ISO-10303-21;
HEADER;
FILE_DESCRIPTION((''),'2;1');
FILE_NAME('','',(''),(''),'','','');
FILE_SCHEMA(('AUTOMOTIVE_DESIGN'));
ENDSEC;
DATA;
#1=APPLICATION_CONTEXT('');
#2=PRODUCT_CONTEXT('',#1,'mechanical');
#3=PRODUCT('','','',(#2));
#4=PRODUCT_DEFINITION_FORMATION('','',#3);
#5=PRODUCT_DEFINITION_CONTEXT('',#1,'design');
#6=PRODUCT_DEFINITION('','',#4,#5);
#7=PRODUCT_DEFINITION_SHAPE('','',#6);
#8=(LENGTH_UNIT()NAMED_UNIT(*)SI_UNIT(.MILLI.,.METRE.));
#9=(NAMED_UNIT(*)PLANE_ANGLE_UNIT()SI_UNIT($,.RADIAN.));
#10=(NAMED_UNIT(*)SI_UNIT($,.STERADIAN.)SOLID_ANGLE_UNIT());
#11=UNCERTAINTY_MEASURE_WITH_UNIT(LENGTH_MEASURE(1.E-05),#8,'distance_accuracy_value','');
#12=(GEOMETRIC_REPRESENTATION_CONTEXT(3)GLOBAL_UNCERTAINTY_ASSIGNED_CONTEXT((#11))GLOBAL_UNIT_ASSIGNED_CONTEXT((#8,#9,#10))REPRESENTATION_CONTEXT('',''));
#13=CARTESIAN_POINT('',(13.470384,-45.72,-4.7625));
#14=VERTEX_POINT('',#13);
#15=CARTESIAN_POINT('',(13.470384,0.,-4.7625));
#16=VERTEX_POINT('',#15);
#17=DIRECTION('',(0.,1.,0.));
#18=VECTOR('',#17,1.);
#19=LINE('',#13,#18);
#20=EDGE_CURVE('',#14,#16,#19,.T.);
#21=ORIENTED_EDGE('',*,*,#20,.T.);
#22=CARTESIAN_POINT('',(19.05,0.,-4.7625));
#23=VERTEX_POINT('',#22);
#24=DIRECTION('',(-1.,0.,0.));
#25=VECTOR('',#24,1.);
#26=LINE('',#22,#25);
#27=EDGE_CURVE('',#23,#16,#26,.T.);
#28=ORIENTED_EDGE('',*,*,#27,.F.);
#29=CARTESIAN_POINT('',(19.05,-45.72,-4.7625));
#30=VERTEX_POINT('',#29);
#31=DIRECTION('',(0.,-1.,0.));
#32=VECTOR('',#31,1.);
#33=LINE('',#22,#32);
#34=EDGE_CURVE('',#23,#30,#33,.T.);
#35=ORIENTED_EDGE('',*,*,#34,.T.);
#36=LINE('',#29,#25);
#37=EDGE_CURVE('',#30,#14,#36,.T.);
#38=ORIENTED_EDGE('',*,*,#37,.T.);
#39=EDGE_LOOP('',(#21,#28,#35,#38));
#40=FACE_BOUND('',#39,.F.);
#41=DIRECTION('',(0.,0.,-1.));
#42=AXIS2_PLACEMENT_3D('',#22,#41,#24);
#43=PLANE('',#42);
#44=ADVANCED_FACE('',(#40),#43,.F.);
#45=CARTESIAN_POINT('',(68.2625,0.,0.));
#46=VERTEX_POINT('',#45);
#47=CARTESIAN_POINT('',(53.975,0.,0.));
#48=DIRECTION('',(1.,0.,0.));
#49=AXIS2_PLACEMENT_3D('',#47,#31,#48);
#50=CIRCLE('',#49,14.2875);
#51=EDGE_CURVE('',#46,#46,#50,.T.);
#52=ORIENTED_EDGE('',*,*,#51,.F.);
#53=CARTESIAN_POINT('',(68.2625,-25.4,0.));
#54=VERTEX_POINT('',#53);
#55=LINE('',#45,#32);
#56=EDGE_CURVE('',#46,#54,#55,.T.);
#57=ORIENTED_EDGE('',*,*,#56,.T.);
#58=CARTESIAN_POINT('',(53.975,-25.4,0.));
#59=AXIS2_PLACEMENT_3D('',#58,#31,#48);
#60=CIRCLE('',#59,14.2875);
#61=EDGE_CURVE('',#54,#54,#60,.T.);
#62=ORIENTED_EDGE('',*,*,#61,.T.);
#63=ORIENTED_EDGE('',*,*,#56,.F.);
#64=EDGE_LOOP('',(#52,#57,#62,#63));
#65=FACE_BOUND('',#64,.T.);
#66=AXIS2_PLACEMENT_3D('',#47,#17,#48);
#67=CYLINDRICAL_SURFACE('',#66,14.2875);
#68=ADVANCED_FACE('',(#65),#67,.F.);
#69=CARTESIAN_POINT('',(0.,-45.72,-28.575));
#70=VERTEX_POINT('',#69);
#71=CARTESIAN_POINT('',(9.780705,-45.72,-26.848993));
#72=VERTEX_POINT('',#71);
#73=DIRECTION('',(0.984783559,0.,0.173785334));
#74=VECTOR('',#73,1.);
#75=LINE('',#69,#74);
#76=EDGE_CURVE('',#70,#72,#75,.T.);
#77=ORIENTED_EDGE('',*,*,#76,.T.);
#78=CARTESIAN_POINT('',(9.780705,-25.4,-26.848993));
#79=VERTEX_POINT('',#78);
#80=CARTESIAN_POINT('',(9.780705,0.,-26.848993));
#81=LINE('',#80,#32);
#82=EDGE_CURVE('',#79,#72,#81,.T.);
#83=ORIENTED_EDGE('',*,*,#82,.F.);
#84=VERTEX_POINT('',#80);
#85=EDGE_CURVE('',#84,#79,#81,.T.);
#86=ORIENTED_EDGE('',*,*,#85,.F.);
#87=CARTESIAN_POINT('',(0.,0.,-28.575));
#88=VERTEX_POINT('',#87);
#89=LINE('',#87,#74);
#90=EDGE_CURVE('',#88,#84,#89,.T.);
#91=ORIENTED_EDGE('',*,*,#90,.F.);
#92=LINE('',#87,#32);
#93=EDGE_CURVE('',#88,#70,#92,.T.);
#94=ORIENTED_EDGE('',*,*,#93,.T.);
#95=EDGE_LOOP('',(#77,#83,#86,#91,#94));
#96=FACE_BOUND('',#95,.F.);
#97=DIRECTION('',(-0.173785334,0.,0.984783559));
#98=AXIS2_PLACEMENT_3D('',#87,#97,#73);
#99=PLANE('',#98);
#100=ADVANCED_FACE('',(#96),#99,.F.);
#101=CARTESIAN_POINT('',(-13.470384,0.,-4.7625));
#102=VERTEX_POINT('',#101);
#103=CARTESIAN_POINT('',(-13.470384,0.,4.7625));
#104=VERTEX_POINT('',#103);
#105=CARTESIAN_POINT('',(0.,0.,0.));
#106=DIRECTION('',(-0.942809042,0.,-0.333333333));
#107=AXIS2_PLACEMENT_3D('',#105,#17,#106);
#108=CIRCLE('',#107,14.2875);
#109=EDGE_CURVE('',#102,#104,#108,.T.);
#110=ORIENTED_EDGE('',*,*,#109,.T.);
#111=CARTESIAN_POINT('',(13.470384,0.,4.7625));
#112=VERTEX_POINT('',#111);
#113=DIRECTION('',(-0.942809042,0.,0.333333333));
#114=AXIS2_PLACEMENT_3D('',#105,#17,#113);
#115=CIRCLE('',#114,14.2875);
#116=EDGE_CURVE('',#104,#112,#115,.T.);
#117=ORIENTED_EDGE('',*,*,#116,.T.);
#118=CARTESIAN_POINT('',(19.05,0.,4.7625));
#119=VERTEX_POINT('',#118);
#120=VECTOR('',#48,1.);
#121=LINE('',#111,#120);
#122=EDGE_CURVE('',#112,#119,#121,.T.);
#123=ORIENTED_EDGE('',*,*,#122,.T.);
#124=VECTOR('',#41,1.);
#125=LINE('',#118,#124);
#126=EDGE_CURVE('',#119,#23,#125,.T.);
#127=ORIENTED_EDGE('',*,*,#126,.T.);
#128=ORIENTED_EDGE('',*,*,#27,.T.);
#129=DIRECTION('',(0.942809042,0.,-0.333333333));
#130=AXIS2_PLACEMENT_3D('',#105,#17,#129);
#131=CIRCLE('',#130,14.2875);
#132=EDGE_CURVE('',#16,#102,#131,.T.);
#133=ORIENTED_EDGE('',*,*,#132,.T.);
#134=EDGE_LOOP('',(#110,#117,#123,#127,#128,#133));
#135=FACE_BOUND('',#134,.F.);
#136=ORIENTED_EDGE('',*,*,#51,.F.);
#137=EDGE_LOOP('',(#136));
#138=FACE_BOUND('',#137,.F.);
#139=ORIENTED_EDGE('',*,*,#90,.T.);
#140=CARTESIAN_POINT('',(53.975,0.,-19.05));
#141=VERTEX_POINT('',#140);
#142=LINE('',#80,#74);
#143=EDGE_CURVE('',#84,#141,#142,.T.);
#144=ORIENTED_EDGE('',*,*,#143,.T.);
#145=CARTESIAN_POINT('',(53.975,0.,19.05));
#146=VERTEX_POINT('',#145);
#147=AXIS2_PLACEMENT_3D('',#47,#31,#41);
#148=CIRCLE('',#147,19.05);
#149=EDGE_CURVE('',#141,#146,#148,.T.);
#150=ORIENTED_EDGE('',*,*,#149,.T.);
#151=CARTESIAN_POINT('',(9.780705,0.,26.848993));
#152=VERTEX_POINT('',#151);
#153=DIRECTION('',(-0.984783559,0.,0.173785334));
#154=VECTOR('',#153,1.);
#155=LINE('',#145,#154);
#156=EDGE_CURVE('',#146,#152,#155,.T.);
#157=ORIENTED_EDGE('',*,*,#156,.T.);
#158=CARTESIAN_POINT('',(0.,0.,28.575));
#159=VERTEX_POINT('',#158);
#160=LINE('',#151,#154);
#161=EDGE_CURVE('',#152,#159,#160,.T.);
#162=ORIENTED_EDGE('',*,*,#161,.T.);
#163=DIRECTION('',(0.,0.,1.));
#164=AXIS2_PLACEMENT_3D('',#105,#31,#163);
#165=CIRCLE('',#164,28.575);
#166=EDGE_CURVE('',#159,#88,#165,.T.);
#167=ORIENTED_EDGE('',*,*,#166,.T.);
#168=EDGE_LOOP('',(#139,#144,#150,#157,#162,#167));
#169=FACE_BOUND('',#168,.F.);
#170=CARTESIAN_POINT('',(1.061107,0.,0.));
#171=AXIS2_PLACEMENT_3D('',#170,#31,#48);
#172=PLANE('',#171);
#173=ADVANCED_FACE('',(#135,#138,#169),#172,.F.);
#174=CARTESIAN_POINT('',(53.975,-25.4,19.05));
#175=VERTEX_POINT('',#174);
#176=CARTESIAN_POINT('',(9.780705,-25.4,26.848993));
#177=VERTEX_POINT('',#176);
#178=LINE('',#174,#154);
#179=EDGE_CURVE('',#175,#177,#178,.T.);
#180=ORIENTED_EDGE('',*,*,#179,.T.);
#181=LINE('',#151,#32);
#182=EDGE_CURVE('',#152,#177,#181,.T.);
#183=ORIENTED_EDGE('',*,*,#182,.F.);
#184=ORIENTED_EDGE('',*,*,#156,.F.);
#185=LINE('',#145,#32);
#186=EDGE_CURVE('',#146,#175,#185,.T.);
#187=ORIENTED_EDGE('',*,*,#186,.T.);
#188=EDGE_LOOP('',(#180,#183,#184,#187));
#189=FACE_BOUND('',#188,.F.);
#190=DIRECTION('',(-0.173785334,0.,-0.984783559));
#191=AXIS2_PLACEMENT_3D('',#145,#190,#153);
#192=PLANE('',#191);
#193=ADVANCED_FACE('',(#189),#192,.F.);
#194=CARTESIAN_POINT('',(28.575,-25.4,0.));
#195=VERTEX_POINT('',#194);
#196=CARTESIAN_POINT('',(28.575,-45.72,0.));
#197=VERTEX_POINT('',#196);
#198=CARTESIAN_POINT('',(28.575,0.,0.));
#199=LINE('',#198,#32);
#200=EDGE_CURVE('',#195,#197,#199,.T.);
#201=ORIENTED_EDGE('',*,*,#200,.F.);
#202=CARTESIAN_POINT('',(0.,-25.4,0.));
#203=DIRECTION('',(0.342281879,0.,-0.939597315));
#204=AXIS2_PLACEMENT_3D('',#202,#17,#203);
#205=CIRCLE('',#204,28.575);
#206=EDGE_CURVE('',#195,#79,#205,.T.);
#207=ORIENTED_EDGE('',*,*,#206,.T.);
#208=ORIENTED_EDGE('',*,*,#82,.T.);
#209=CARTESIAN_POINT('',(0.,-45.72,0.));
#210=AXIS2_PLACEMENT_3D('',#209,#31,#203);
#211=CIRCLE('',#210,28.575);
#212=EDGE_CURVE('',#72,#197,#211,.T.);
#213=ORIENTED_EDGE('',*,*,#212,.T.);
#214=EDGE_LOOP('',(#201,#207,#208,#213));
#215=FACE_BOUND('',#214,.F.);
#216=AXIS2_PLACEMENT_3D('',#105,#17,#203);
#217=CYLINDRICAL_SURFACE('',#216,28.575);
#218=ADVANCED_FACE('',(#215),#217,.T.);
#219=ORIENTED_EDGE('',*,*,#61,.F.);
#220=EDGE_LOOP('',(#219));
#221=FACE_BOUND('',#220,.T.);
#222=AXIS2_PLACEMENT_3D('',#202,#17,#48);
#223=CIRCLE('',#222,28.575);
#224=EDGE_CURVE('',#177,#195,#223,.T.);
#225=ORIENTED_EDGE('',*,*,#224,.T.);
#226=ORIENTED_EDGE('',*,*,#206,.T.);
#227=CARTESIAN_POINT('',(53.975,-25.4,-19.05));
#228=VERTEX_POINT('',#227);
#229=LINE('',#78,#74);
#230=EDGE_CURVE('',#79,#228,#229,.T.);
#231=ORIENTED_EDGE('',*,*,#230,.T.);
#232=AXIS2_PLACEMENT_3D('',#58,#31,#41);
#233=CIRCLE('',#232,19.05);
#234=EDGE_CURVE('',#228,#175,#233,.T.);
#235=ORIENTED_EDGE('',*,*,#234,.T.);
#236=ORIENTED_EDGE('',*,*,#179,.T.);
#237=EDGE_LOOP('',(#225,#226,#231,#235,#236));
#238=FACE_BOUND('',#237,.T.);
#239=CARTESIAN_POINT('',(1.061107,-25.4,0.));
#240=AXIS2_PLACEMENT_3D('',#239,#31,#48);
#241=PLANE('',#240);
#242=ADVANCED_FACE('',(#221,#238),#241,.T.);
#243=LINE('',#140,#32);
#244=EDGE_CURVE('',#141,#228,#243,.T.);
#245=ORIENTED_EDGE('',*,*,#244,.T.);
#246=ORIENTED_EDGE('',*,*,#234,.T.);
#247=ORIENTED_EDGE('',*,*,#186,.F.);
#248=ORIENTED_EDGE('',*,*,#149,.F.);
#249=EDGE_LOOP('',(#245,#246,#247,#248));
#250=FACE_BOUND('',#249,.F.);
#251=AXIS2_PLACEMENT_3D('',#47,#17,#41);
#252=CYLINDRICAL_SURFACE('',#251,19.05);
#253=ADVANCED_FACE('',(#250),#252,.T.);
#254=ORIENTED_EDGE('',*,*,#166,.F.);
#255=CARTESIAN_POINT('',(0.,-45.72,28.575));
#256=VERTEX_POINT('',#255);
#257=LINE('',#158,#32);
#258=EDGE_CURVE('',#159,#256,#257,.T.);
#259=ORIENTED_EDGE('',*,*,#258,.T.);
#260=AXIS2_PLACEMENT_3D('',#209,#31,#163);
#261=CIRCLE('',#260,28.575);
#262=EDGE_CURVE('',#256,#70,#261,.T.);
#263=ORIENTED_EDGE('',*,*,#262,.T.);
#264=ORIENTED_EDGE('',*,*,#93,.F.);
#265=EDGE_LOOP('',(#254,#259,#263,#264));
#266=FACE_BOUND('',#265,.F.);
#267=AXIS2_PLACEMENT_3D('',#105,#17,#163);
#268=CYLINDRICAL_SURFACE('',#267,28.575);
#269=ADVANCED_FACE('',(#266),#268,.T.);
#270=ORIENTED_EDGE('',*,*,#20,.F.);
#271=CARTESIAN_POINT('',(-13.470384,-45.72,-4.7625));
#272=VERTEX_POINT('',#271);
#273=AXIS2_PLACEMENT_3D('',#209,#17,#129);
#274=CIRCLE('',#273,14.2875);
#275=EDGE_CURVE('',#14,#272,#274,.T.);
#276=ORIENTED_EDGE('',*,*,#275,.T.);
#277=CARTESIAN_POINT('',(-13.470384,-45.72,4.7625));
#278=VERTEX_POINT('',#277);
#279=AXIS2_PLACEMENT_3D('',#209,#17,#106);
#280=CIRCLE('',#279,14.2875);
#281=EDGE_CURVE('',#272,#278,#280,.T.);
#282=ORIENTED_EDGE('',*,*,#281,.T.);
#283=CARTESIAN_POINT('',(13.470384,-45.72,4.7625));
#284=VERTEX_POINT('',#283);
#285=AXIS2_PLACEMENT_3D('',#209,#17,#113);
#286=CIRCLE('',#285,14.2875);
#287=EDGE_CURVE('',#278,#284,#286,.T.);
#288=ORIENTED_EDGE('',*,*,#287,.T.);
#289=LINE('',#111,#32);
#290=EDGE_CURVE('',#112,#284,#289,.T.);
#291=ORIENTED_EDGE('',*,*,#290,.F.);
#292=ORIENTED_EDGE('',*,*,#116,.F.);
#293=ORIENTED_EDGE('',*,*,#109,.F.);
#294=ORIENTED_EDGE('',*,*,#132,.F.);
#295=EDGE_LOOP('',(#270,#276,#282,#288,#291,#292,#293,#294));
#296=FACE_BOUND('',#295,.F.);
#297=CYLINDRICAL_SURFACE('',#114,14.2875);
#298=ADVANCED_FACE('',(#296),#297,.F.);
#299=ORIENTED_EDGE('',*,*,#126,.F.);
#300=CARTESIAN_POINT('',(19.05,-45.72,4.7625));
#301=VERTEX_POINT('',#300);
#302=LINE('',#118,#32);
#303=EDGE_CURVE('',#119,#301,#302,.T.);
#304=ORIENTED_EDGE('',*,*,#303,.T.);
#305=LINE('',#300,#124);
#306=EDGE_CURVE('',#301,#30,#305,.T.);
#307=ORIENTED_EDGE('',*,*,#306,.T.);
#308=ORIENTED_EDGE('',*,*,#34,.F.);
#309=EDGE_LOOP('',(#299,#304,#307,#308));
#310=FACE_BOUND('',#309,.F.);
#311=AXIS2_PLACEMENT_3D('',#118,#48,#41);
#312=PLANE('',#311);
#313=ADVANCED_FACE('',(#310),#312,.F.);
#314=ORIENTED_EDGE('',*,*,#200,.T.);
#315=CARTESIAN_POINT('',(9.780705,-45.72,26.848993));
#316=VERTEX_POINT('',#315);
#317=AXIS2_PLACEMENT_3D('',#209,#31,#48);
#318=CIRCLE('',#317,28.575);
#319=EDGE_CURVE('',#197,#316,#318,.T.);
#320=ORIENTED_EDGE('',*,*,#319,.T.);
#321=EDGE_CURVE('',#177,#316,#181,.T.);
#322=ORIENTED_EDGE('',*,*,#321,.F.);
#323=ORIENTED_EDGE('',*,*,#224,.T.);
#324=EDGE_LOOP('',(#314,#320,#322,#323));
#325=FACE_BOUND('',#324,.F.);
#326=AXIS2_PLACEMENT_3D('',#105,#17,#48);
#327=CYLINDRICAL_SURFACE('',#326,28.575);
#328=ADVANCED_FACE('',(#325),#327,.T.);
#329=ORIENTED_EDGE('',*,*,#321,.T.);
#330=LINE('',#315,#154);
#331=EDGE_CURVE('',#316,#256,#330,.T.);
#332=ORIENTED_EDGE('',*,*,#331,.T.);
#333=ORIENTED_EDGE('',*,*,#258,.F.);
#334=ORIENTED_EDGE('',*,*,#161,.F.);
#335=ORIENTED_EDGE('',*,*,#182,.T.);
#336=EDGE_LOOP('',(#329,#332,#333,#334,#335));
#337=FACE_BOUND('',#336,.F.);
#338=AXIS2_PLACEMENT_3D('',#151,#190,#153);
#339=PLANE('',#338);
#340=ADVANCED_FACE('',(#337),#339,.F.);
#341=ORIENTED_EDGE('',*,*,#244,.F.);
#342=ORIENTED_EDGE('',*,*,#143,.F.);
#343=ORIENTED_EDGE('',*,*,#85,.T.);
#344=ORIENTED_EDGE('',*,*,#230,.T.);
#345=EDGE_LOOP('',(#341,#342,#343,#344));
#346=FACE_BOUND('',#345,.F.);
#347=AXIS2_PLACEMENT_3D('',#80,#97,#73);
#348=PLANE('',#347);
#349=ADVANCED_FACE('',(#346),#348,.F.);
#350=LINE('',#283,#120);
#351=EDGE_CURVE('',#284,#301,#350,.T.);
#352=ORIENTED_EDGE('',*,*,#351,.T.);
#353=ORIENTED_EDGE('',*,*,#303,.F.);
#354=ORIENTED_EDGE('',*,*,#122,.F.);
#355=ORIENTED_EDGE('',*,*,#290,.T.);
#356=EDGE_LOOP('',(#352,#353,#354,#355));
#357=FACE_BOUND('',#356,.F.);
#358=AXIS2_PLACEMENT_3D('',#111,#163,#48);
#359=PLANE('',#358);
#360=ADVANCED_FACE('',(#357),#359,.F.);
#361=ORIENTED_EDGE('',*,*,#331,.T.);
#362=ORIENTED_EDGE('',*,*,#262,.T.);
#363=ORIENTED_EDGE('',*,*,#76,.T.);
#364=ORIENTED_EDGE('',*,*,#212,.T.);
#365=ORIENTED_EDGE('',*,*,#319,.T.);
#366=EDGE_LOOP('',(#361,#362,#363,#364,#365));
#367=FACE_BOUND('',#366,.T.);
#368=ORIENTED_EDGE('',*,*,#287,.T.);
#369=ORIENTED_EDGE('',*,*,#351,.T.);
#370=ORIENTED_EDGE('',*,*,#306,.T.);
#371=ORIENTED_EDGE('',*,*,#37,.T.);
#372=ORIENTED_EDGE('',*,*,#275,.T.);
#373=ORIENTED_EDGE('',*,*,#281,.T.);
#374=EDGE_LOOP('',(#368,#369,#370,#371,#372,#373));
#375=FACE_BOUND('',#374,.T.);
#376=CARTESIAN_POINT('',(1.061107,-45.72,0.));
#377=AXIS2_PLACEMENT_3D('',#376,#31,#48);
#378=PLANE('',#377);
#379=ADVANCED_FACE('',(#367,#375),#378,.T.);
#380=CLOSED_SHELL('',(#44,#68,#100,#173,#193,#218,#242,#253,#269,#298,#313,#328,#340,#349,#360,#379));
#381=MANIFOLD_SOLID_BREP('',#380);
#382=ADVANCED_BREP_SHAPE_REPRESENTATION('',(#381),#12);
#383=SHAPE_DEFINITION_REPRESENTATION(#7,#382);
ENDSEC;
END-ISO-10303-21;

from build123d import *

# Parameters (mm, degrees)
F0_R     = 14.2875
F1_DEPTH = 25.4
F2_DEPTH = 45.72


with BuildPart() as f1:
    # F0 (on Front) → F1 (new body)
    with BuildSketch(Plane.XZ):
        with BuildLine():
            Line((9.780704698, 26.8489932886), (0, 28.575))
            ThreePointArc((0, 28.575), (-28.575, 0), (0, -28.575))
            Line((0, -28.575), (9.780704698, -26.8489932886))
            ThreePointArc((9.780704698, -26.8489932886), (23.4095521288, -16.3866864902), (28.575, 0))
            ThreePointArc((28.575, 0), (23.4095521288, 16.3866864902), (9.780704698, 26.8489932886))
        make_face()
        with BuildLine():
            ThreePointArc((-13.4703841816, 4.7625), (0, 14.2875), (13.4703841816, 4.7625))
            Line((13.4703841816, 4.7625), (19.05, 4.7625))
            Line((19.05, 4.7625), (19.05, -4.7625))
            Line((19.05, -4.7625), (13.4703841816, -4.7625))
            ThreePointArc((13.4703841816, -4.7625), (0, -14.2875), (-13.4703841816, -4.7625))
            Line((-13.4703841816, -4.7625), (-19.05, -4.7625))
            Line((-19.05, -4.7625), (-19.05, 4.7625))
            Line((-19.05, 4.7625), (-13.4703841816, 4.7625))
        make_face(mode=Mode.SUBTRACT)
        with BuildLine():
            Line((53.975, 19.05), (9.780704698, 26.8489932886))
            ThreePointArc((9.780704698, 26.8489932886), (23.4095521288, 16.3866864902), (28.575, 0))
            ThreePointArc((28.575, 0), (23.4095521288, -16.3866864902), (9.780704698, -26.8489932886))
            Line((9.780704698, -26.8489932886), (53.975, -19.05))
            ThreePointArc((53.975, -19.05), (34.925, 0), (53.975, 19.05))
        make_face()
        with BuildLine():
            ThreePointArc((73.025, 0), (67.4453841816, 13.4703841816), (53.975, 19.05))
            ThreePointArc((53.975, 19.05), (34.925, 0), (53.975, -19.05))
            ThreePointArc((53.975, -19.05), (67.4453841816, -13.4703841816), (73.025, 0))
        make_face()
        with Locations((53.975, 0)):
            Circle(F0_R, mode=Mode.SUBTRACT)
        with BuildLine():
            ThreePointArc((-13.4703841816, -4.7625), (-14.2875, 0), (-13.4703841816, 4.7625))
            Line((-13.4703841816, 4.7625), (-19.05, 4.7625))
            Line((-19.05, 4.7625), (-19.05, -4.7625))
            Line((-19.05, -4.7625), (-13.4703841816, -4.7625))
        make_face()
    extrude(amount=F1_DEPTH)

    # F0 (on Front) → F2 (join)
    with BuildSketch(Plane.XZ):
        with BuildLine():
            Line((9.780704698, 26.8489932886), (0, 28.575))
            ThreePointArc((0, 28.575), (-28.575, 0), (0, -28.575))
            Line((0, -28.575), (9.780704698, -26.8489932886))
            ThreePointArc((9.780704698, -26.8489932886), (23.4095521288, -16.3866864902), (28.575, 0))
            ThreePointArc((28.575, 0), (23.4095521288, 16.3866864902), (9.780704698, 26.8489932886))
        make_face()
        with BuildLine():
            ThreePointArc((-13.4703841816, 4.7625), (0, 14.2875), (13.4703841816, 4.7625))
            Line((13.4703841816, 4.7625), (19.05, 4.7625))
            Line((19.05, 4.7625), (19.05, -4.7625))
            Line((19.05, -4.7625), (13.4703841816, -4.7625))
            ThreePointArc((13.4703841816, -4.7625), (0, -14.2875), (-13.4703841816, -4.7625))
            Line((-13.4703841816, -4.7625), (-19.05, -4.7625))
            Line((-19.05, -4.7625), (-19.05, 4.7625))
            Line((-19.05, 4.7625), (-13.4703841816, 4.7625))
        make_face(mode=Mode.SUBTRACT)
        with BuildLine():
            ThreePointArc((-13.4703841816, -4.7625), (-14.2875, 0), (-13.4703841816, 4.7625))
            Line((-13.4703841816, 4.7625), (-19.05, 4.7625))
            Line((-19.05, 4.7625), (-19.05, -4.7625))
            Line((-19.05, -4.7625), (-13.4703841816, -4.7625))
        make_face()
    extrude(amount=F2_DEPTH)


solid = f1.part
